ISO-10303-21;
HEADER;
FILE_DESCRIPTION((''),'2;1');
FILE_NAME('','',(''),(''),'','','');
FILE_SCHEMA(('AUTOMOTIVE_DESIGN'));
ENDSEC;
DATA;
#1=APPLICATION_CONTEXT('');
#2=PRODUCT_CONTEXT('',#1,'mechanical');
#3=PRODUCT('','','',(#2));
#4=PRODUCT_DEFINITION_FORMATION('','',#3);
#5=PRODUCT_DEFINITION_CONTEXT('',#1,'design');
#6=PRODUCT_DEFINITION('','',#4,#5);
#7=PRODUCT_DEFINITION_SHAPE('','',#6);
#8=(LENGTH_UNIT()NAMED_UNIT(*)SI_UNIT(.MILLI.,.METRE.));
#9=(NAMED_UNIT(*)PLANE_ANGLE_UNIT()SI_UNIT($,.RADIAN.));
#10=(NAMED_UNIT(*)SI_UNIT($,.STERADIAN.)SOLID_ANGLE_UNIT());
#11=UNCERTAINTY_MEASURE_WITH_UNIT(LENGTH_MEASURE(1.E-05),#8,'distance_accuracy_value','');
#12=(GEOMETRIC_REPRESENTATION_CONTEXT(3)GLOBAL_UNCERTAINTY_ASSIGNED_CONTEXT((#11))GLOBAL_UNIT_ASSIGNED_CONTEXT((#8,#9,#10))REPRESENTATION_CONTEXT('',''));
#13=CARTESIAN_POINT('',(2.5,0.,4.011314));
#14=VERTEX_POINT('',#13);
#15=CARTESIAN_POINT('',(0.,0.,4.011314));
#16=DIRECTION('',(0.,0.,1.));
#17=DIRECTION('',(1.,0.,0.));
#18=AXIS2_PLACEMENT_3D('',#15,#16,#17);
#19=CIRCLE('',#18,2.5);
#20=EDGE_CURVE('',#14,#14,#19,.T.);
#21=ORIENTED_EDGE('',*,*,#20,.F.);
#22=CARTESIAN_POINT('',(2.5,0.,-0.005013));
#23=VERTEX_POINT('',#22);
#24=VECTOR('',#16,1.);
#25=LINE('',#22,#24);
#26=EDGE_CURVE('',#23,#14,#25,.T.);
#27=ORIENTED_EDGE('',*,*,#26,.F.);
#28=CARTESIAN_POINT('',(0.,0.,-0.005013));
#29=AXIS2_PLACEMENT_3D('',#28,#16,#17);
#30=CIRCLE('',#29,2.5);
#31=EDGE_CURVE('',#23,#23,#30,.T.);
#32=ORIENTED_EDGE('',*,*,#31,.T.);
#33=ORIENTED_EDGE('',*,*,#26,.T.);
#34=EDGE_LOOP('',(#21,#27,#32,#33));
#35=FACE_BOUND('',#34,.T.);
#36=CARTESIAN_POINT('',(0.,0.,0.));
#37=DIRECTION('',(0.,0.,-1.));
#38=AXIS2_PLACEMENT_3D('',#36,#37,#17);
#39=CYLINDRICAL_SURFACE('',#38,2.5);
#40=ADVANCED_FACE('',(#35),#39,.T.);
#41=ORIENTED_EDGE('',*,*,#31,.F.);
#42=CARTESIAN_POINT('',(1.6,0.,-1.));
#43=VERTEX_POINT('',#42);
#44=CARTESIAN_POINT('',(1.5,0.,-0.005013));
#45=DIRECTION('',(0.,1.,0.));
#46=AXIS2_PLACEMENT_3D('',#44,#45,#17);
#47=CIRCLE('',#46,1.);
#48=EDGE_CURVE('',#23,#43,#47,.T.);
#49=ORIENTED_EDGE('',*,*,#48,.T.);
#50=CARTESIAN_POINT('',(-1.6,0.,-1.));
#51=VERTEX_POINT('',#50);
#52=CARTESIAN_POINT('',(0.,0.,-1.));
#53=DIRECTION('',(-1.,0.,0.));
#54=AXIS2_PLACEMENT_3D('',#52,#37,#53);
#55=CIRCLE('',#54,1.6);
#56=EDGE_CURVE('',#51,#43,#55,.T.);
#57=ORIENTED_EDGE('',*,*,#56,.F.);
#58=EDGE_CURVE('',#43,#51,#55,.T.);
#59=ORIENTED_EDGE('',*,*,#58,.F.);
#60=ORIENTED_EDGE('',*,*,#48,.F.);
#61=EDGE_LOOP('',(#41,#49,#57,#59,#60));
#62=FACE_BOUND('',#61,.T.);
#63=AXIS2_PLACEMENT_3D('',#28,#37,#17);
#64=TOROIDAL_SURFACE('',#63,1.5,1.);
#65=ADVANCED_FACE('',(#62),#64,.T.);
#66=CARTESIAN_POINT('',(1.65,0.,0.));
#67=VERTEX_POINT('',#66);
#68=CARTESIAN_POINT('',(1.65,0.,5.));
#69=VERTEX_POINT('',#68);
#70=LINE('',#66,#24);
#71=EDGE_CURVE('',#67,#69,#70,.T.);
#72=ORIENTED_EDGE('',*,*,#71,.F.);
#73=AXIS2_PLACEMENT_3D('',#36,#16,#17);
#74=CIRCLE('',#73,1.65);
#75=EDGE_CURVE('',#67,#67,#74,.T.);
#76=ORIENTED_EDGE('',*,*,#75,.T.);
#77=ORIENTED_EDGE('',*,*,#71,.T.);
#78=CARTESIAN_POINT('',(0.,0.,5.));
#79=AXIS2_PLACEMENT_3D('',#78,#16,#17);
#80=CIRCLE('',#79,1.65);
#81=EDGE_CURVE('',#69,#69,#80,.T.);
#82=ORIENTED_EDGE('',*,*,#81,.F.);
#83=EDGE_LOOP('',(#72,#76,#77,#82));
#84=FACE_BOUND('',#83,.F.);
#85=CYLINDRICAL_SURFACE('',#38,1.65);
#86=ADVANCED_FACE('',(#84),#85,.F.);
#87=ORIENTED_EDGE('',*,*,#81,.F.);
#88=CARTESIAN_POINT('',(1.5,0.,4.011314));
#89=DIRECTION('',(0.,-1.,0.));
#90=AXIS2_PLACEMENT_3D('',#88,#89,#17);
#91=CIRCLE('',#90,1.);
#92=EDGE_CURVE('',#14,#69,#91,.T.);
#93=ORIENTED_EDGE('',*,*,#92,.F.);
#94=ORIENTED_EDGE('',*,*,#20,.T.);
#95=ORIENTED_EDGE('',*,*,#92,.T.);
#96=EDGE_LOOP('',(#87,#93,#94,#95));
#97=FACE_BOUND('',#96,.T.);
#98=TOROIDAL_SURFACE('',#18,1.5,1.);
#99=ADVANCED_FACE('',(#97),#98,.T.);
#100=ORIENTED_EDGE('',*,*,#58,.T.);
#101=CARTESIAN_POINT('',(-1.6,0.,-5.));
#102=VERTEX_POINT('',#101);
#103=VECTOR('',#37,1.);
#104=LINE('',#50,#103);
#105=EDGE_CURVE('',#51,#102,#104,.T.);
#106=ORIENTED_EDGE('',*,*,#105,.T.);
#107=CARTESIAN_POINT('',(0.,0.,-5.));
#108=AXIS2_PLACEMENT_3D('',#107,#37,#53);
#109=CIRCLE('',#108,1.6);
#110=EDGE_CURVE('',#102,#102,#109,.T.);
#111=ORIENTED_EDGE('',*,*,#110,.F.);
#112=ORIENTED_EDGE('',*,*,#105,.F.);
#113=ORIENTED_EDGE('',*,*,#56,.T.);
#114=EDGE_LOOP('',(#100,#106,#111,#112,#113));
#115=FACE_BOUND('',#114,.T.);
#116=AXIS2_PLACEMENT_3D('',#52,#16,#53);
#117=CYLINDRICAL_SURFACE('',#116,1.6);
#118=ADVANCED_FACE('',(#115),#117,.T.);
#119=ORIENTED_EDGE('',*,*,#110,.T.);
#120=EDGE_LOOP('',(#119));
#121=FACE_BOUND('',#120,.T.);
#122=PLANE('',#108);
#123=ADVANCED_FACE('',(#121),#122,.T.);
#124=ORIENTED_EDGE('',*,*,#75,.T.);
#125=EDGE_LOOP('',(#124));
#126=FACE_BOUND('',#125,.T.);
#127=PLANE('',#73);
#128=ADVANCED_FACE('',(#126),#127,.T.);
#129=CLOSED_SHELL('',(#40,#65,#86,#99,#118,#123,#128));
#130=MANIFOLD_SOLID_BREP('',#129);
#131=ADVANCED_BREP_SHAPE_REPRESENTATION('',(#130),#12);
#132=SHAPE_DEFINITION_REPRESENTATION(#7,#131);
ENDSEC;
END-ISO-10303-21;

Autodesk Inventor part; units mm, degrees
ref_plane "YZ Plane" through (0, 0, 0) normal (1, 0, 0) x (0, 1, 0)
ref_plane "XZ Plane" through (0, 0, 0) normal (0, 1, 0) x (-1, 0, 0)
ref_plane "XY Plane" through (0, 0, 0) normal (0, 0, 1) x (1, 0, 0)
sketch "Sketch1" plane through (0, 0, 0) normal (0, 0, 1) x (1, 0, 0)
  circle A0 centre (0, 0) radius 1.65
  circle A1 centre (0, 0) radius 2.5
  dimension "d0" = 3.3
  dimension "d1" = 5
extrude "Extrusion1" add sketch "Sketch1" along normal blind 5
sketch "Sketch2" plane through (0, 0, 0) normal (0, 0, 1) x (1, 0, 0)
  circle A0 centre (0, 0) radius 2.5 projected
extrude "Extrusion2" add sketch "Sketch2" against normal blind 1
sketch "Sketch3" plane through (0, 0, -1) normal (0, 0, -1) x (-1, 0, 0)
  circle A0 centre (0, 0) radius 1.6
  dimension "d6" = 3.2
extrude "Extrusion3" add sketch "Sketch3" along normal blind 4
fillet "Fillet1" radius 1 2 edges at (-2.5, 0, -1) (-2.5, 0, 5)
properties part number "Hat"
